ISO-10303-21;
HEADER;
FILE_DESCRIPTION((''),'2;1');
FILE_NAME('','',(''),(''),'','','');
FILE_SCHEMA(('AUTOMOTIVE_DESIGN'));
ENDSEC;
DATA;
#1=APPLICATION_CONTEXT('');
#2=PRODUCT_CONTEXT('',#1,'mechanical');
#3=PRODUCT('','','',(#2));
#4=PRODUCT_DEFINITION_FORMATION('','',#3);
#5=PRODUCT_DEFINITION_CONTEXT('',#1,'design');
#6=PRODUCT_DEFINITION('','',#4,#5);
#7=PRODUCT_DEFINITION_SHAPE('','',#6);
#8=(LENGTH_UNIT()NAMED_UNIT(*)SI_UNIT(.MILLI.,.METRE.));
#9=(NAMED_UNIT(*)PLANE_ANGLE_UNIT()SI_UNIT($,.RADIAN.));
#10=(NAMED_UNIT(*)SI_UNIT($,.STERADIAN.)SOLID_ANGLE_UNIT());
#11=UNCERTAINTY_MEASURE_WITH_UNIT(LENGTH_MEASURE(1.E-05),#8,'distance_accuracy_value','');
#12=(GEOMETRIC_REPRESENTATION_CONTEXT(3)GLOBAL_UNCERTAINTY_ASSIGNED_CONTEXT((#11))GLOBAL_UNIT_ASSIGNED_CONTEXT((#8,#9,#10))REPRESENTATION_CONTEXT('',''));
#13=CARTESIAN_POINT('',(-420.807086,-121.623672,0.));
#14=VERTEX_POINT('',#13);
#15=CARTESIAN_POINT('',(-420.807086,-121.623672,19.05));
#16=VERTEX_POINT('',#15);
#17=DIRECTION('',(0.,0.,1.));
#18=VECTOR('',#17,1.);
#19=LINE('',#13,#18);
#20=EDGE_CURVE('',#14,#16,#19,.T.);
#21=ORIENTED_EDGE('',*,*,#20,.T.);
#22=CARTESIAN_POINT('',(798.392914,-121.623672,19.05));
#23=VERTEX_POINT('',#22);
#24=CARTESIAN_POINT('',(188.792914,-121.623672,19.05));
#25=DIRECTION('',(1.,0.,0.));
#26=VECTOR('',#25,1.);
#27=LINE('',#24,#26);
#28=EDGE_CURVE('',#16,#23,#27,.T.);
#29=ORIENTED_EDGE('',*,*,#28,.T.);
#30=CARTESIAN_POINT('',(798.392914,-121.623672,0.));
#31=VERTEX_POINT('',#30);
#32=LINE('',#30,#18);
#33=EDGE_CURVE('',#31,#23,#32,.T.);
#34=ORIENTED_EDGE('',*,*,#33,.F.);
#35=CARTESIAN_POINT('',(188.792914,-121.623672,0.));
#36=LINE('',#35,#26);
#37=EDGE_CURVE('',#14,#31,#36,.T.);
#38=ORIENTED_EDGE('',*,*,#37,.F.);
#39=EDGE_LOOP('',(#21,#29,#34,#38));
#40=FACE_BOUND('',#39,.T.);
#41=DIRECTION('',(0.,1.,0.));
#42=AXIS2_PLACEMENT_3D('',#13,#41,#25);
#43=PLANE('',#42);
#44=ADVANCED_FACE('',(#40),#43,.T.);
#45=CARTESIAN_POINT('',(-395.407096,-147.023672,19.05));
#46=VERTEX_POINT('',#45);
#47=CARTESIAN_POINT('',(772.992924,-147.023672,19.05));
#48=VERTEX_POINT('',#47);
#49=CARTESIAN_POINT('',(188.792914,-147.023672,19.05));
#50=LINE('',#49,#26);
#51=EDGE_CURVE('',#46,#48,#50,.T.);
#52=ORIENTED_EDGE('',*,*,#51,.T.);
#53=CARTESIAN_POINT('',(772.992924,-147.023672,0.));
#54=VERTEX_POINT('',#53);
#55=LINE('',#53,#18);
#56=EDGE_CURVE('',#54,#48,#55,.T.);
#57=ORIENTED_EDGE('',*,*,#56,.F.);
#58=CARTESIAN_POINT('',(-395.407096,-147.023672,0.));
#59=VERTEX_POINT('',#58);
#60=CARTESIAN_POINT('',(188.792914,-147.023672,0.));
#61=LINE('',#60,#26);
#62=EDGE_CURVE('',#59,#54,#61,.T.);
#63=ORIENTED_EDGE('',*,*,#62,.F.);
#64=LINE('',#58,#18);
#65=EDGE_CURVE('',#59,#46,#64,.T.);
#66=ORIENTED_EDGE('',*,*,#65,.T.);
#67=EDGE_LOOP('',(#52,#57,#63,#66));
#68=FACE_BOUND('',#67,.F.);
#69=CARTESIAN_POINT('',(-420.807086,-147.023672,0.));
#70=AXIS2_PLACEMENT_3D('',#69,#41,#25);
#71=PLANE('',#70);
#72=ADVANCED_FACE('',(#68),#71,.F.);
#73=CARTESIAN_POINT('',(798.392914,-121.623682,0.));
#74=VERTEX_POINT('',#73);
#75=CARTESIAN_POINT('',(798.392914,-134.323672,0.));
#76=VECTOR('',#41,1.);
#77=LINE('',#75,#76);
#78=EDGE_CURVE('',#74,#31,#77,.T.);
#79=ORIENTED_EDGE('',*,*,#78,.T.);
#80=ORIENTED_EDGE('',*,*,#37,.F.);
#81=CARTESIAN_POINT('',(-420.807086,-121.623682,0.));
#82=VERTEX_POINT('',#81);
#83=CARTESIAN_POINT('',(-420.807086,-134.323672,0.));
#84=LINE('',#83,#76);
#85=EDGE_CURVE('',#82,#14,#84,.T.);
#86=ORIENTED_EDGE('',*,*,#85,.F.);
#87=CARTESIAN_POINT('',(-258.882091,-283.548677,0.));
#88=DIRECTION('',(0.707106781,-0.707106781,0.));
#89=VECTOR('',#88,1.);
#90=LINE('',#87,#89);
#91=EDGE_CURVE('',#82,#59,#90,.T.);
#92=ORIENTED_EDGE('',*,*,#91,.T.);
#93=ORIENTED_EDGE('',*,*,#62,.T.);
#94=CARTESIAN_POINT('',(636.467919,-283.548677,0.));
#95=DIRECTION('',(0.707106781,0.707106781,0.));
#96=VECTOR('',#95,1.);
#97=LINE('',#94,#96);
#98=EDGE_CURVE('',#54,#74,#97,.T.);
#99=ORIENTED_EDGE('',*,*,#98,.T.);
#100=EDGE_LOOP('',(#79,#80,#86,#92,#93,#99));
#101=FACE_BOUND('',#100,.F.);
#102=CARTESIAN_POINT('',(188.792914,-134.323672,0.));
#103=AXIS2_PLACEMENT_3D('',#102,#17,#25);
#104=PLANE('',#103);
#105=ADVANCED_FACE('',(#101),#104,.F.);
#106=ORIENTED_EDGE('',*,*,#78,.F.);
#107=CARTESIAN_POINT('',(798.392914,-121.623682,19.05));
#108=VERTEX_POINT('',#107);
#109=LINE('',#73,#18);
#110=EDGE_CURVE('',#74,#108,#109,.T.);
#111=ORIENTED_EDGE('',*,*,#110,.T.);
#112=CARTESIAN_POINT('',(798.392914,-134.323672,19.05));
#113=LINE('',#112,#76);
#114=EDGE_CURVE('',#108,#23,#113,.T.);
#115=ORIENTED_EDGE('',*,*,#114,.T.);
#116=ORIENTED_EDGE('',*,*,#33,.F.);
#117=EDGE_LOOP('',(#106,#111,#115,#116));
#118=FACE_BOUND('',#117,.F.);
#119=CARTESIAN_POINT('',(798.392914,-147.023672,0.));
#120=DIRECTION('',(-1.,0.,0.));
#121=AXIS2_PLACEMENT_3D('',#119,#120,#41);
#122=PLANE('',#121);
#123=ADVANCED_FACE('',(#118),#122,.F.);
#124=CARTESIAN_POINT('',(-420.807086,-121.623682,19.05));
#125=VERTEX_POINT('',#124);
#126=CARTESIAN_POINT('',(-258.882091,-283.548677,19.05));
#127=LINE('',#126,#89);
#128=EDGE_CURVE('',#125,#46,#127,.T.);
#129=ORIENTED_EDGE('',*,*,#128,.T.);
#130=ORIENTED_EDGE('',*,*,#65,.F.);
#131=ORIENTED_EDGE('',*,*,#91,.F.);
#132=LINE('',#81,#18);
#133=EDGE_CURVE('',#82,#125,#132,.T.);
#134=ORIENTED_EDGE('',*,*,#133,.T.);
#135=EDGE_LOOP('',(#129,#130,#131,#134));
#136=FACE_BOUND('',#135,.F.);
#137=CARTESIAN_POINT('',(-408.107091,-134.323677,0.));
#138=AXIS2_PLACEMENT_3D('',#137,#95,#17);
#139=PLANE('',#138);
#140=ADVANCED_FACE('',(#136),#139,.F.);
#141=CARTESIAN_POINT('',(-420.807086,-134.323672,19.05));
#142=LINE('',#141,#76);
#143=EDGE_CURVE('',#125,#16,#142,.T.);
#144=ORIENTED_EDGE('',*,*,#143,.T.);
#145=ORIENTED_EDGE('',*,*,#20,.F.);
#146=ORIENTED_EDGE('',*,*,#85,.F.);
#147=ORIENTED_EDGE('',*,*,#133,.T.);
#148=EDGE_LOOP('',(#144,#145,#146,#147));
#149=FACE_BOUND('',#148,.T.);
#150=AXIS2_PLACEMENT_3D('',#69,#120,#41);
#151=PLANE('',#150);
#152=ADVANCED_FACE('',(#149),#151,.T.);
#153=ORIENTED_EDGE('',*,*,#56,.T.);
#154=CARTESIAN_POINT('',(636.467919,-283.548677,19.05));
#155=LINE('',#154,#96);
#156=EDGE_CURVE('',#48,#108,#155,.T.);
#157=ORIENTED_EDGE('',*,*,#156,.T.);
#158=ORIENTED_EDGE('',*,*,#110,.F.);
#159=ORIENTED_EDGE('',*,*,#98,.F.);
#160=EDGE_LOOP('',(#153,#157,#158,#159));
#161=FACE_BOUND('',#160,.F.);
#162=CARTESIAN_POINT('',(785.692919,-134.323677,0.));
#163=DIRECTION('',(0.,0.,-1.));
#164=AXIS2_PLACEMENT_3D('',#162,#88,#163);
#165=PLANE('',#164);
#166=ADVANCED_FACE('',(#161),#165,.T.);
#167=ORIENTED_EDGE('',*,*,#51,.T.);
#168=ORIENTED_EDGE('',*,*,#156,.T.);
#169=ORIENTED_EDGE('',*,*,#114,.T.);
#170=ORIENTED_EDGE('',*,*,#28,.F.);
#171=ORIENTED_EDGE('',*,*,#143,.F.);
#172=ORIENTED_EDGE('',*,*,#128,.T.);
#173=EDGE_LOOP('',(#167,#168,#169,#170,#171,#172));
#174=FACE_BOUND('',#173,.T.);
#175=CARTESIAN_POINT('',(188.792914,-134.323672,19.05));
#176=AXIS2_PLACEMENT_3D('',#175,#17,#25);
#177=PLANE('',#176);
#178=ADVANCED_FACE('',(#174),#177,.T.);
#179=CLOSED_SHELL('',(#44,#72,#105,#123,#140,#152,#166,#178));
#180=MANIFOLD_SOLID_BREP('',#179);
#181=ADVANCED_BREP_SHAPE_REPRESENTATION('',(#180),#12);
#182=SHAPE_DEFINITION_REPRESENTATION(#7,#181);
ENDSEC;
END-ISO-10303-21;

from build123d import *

# Parameters (mm, degrees)
F0_W     = 1219.2
F0_H     = 25.4
F1_DEPTH = 19.05
F2_SIZE  = 25.39999


# Not quite as in the source:
# - a fillet or chamfer is up to 0.001 mm smaller than in the source, because OpenCascade refuses the exact size


with BuildPart() as f1:
    # F0 (on Top) → F1 (new body)
    with BuildSketch(Plane.XY):
        with Locations((188.7929144382, -134.3236717459)):
            Rectangle(F0_W, F0_H)
    extrude(amount=F1_DEPTH)

    # F2 (size 25.4 in the source; OpenCascade refuses exactly that, so slightly less here)
    f2_edges = [f1.edges().sort_by_distance(p)[0] for p in [
        (798.392914, -147.023672, 9.525),
        (-420.807086, -147.023672, 9.525),
    ]]
    chamfer(f2_edges, length=F2_SIZE)


solid = f1.part
